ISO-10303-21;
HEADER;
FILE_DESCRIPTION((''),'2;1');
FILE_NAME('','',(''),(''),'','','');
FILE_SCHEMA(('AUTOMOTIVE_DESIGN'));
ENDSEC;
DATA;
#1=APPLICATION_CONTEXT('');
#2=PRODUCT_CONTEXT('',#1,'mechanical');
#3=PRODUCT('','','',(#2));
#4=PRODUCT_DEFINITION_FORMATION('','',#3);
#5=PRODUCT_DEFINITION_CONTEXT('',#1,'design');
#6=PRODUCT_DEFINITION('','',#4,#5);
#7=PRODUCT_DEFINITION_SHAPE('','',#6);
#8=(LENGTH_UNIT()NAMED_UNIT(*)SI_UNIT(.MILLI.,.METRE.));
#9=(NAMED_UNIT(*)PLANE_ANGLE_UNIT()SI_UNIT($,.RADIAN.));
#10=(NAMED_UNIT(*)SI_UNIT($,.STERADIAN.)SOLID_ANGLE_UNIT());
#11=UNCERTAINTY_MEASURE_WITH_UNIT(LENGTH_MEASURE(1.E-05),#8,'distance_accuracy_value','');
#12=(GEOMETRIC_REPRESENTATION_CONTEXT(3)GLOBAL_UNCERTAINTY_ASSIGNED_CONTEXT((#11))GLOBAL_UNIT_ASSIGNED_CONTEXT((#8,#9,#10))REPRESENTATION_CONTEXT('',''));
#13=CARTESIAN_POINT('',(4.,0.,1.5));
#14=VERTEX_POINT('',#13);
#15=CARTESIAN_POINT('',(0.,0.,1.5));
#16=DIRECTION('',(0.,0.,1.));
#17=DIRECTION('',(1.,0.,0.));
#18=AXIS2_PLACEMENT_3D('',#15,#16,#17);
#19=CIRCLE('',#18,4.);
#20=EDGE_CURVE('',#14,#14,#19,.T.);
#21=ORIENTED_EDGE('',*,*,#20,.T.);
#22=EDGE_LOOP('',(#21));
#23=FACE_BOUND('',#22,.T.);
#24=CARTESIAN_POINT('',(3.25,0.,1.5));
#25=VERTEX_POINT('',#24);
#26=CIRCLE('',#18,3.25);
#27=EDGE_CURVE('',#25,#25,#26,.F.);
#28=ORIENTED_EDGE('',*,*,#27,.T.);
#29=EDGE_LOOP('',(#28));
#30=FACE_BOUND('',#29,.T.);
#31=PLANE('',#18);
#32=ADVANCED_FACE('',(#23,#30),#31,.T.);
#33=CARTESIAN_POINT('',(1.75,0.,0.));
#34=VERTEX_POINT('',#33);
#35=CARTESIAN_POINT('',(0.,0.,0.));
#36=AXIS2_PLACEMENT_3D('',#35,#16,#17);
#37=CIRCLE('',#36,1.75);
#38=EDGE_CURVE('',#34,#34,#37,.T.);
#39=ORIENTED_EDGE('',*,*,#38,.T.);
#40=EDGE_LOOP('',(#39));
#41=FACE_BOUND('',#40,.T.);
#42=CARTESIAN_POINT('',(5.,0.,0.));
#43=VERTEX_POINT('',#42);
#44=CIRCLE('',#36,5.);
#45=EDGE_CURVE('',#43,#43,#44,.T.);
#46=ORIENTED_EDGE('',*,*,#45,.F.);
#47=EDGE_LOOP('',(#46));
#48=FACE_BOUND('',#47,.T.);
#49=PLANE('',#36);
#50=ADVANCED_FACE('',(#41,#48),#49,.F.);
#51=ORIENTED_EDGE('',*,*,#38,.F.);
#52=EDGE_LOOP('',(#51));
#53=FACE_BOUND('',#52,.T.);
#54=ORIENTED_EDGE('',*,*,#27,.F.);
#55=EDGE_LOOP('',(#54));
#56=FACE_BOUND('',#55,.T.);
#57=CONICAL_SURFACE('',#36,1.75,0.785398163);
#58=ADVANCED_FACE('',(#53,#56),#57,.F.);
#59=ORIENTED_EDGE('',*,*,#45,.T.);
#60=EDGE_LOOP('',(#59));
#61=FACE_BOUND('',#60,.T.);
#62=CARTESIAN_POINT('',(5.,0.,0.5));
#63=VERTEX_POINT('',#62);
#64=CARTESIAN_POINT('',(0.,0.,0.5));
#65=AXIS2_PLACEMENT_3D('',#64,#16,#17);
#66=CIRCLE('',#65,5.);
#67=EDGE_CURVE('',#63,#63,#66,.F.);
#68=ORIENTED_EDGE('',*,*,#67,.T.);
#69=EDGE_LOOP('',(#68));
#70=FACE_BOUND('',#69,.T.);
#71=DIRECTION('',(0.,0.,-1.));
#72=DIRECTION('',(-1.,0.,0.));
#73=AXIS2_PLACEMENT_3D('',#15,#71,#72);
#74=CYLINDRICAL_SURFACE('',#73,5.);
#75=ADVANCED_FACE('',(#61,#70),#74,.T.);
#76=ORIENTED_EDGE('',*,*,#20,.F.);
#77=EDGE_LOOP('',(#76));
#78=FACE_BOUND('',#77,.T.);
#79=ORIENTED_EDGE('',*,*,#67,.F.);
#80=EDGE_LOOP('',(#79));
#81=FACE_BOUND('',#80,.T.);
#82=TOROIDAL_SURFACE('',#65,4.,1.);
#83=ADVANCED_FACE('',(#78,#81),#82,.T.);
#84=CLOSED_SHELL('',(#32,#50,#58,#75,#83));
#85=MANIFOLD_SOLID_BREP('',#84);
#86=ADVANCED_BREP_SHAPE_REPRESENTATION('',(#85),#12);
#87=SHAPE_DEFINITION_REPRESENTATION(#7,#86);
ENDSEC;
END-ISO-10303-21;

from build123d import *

# Parameters (mm, degrees)
SKETCH1_R           = 5
BOSS_EXTRUDE1_DEPTH = 1.5
SKETCH2_R           = 1.75
CUT_EXTRUDE1_DEPTH  = 8.228416147
CHAMFER1_SIZE       = 1.5
FILLET1_R           = 1


with BuildPart() as part:
    # Sketch1 → Boss-Extrude1 (new body)
    with BuildSketch(Plane.XY):
        Circle(SKETCH1_R)
    extrude(amount=BOSS_EXTRUDE1_DEPTH)

    # Sketch2 → Cut-Extrude1 (cut, through all)
    with BuildSketch(Plane.XY):
        Circle(SKETCH2_R)
    extrude(amount=CUT_EXTRUDE1_DEPTH, mode=Mode.SUBTRACT)

    # Chamfer1
    chamfer1_edges = [part.edges().sort_by_distance(p)[0] for p in [
        (-1.75, 0, 1.5),
    ]]
    chamfer(chamfer1_edges, length=CHAMFER1_SIZE - 0.0001)  # a hair under: the kernel refuses the full size

    # Fillet1
    fillet1_edges = [part.edges().sort_by_distance(p)[0] for p in [
        (-5, 0, 1.5),
    ]]
    fillet(fillet1_edges, radius=FILLET1_R)


solid = part.part
